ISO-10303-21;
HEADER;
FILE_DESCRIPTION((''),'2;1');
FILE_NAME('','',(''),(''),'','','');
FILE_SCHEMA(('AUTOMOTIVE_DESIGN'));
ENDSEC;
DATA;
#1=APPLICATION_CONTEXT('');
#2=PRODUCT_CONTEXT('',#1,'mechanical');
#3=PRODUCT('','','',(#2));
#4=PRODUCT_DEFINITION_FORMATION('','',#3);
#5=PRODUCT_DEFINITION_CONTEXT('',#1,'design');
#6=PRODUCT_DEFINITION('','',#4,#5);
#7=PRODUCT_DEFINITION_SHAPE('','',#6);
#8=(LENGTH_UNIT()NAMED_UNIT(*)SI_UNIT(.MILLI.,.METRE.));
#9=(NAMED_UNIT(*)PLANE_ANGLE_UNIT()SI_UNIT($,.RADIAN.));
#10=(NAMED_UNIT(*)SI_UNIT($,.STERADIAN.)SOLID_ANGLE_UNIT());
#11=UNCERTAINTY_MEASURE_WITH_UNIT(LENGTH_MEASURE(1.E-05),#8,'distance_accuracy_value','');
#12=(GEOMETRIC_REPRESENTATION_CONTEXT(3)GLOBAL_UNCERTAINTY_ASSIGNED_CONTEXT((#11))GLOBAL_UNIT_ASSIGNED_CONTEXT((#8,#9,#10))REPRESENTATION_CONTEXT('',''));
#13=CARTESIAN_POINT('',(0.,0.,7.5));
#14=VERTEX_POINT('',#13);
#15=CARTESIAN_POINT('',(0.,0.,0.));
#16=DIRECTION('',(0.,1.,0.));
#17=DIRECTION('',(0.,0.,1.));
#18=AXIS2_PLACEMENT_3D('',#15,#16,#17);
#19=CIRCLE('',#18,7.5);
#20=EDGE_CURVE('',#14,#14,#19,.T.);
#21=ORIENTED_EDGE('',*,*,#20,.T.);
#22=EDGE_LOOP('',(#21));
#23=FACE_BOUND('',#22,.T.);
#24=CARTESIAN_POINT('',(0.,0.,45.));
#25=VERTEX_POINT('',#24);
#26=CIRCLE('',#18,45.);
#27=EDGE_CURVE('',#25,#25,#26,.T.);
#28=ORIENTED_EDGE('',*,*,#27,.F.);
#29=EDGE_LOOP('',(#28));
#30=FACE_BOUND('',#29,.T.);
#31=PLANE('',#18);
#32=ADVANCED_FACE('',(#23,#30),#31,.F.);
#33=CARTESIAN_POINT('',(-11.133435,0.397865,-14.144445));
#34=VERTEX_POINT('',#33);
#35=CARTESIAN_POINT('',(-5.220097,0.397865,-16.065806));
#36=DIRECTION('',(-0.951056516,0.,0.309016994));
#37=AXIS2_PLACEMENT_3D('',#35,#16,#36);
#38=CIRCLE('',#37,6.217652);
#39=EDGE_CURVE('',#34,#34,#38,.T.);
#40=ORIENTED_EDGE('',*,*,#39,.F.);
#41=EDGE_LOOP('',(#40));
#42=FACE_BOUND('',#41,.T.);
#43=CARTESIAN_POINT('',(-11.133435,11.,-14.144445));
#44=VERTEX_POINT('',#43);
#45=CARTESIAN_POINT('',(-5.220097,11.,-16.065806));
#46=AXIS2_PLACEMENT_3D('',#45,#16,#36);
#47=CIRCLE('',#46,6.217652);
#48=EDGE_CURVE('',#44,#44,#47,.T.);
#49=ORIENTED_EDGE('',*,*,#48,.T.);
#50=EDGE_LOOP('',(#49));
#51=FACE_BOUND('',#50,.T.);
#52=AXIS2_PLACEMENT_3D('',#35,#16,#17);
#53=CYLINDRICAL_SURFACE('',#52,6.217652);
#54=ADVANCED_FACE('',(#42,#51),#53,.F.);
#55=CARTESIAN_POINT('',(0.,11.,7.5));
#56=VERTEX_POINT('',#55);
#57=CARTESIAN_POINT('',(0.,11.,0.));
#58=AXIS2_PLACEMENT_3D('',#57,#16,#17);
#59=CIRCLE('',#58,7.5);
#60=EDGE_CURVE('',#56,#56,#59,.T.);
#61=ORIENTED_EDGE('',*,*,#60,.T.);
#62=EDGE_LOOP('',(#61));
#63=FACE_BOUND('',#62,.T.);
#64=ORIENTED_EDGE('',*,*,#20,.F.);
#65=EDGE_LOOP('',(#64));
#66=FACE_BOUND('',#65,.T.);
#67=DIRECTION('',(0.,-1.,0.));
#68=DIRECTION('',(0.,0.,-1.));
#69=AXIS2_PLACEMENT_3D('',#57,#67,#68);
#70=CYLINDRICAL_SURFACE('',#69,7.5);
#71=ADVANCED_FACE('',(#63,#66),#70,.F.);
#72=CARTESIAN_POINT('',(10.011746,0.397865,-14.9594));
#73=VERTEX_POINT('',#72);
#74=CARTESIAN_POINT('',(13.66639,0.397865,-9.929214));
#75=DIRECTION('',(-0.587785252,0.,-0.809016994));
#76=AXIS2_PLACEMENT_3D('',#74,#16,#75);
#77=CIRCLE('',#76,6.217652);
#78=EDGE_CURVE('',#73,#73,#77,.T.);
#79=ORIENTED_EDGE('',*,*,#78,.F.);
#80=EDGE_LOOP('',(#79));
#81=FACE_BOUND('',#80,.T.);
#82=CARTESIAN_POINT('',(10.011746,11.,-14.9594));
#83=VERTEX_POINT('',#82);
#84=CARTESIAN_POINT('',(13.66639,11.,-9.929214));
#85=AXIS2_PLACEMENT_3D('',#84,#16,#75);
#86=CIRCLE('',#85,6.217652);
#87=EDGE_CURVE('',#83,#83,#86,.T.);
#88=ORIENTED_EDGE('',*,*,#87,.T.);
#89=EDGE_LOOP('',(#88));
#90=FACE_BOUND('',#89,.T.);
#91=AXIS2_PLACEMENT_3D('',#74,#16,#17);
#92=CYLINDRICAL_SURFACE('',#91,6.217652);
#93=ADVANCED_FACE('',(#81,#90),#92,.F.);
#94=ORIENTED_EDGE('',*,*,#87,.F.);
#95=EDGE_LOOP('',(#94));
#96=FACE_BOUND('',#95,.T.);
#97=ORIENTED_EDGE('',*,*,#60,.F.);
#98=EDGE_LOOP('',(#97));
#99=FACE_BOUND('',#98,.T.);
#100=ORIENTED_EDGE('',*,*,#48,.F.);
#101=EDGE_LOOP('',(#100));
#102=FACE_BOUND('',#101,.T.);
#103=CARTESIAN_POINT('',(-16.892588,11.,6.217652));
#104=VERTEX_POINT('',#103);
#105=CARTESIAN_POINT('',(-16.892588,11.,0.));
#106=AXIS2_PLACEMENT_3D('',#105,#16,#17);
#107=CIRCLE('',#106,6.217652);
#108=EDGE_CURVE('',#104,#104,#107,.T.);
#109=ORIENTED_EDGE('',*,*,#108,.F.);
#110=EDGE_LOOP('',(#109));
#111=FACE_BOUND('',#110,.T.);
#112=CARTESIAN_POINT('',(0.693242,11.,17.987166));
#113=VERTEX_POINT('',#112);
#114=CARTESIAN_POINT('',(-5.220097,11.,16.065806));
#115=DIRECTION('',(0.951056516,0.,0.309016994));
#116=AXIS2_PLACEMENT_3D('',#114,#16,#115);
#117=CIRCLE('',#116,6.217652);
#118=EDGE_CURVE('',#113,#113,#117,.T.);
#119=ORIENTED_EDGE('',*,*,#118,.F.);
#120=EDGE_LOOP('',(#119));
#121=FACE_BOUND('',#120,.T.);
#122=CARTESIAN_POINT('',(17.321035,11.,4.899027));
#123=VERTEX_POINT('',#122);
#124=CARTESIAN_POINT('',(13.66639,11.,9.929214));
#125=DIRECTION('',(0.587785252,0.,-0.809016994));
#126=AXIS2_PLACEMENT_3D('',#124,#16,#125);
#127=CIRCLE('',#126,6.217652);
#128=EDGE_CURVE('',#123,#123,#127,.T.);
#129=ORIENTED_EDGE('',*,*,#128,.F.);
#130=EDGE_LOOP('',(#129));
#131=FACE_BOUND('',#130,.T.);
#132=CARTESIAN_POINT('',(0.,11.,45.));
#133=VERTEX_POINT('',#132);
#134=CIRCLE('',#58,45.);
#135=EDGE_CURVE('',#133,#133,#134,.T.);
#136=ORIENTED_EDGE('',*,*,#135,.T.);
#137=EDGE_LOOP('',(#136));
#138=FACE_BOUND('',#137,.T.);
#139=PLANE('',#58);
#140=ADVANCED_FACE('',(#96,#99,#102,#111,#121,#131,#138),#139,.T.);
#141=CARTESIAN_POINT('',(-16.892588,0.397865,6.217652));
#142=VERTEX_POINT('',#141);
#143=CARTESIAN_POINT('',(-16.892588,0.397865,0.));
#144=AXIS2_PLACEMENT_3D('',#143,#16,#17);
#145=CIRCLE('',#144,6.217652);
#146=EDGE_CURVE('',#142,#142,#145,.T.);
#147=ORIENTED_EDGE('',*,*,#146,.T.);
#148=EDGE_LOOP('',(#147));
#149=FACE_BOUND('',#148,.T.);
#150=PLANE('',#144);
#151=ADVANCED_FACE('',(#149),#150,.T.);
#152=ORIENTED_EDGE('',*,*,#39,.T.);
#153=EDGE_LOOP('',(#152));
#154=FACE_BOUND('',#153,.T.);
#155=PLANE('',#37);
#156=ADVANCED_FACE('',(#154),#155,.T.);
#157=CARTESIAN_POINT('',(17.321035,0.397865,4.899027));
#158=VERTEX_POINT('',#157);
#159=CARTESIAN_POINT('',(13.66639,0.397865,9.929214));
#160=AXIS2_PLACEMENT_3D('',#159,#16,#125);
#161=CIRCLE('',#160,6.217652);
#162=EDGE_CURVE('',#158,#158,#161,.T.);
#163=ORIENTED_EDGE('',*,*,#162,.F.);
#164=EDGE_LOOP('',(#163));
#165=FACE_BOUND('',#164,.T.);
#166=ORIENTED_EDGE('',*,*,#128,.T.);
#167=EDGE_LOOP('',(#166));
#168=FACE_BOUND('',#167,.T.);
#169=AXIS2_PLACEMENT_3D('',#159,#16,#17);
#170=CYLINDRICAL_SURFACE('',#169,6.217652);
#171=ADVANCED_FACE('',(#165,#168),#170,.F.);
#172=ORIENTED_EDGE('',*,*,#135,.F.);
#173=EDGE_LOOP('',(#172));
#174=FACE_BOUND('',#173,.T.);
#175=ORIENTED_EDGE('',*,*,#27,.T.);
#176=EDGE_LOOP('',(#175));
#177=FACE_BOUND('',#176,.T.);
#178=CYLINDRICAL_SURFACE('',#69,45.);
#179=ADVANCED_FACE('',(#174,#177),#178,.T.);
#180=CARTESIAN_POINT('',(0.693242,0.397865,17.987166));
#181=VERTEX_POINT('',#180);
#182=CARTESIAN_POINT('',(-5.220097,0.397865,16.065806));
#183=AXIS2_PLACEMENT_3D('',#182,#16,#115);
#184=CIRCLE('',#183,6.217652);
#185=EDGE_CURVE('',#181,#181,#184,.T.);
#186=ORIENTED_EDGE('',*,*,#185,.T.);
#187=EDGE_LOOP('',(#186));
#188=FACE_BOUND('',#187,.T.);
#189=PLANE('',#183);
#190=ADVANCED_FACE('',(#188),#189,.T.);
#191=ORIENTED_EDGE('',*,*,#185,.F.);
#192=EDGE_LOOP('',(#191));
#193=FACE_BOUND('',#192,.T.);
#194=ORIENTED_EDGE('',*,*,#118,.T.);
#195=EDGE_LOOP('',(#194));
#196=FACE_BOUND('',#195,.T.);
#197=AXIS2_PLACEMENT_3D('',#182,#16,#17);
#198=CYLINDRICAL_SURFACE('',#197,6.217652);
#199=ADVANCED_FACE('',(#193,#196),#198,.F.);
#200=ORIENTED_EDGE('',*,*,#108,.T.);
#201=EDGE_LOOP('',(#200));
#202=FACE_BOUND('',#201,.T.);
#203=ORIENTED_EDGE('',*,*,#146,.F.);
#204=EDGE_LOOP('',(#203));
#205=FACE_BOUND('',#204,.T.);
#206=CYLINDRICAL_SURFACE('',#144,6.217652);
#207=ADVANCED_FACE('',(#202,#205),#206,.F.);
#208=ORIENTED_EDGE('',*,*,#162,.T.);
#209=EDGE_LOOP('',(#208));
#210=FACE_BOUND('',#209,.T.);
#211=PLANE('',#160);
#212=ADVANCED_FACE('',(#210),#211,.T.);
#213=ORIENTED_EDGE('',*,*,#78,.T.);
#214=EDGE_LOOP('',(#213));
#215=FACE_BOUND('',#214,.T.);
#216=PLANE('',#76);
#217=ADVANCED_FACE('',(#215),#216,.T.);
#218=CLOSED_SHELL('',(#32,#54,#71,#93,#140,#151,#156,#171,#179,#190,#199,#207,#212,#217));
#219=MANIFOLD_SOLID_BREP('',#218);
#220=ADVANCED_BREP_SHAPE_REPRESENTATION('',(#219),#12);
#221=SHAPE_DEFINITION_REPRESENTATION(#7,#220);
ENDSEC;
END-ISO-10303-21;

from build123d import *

# Parameters (mm, degrees)
SKETCH1_R           = 45
BOSS_EXTRUDE1_DEPTH = 11
SKETCH2_R           = 7.5
CUT_EXTRUDE1_DEPTH  = 65.58327957
SKETCH3_R           = 6.217652309
CUT_EXTRUDE2_DEPTH  = 10.602135451
CIRPATTERN1_COUNT   = 5


with BuildPart() as part:
    # Sketch1 → Boss-Extrude1 (new body)
    with BuildSketch(Plane(origin=(0, 0, 0), x_dir=(1, 0, 0), z_dir=(0, 1, 0))):
        Circle(SKETCH1_R)
    extrude(amount=BOSS_EXTRUDE1_DEPTH)

    # Sketch2 → Cut-Extrude1 (cut, through all)
    with BuildSketch(Plane(origin=(0, 0, 0), x_dir=(1, 0, 0), z_dir=(0, 1, 0))):
        Circle(SKETCH2_R)
    extrude(amount=CUT_EXTRUDE1_DEPTH, mode=Mode.SUBTRACT)

    # Sketch3 → Cut-Extrude2 (cut)
    with BuildSketch(Plane(origin=(0, 11, 0), x_dir=(1, 0, 0), z_dir=(0, 1, 0))):
        with Locations((-16.892587614, 0)):
            Circle(SKETCH3_R)
    cut_extrude2 = extrude(amount=-CUT_EXTRUDE2_DEPTH, mode=Mode.SUBTRACT)

    # CirPattern1: Cut-Extrude2 ×5 about axis
    cirpattern1_axis = Axis((0, 0, 0), (0, 1, 0))
    for i in range(1, CIRPATTERN1_COUNT):
        add(cut_extrude2.rotate(cirpattern1_axis, i * 360 / CIRPATTERN1_COUNT), mode=Mode.SUBTRACT)


solid = part.part
